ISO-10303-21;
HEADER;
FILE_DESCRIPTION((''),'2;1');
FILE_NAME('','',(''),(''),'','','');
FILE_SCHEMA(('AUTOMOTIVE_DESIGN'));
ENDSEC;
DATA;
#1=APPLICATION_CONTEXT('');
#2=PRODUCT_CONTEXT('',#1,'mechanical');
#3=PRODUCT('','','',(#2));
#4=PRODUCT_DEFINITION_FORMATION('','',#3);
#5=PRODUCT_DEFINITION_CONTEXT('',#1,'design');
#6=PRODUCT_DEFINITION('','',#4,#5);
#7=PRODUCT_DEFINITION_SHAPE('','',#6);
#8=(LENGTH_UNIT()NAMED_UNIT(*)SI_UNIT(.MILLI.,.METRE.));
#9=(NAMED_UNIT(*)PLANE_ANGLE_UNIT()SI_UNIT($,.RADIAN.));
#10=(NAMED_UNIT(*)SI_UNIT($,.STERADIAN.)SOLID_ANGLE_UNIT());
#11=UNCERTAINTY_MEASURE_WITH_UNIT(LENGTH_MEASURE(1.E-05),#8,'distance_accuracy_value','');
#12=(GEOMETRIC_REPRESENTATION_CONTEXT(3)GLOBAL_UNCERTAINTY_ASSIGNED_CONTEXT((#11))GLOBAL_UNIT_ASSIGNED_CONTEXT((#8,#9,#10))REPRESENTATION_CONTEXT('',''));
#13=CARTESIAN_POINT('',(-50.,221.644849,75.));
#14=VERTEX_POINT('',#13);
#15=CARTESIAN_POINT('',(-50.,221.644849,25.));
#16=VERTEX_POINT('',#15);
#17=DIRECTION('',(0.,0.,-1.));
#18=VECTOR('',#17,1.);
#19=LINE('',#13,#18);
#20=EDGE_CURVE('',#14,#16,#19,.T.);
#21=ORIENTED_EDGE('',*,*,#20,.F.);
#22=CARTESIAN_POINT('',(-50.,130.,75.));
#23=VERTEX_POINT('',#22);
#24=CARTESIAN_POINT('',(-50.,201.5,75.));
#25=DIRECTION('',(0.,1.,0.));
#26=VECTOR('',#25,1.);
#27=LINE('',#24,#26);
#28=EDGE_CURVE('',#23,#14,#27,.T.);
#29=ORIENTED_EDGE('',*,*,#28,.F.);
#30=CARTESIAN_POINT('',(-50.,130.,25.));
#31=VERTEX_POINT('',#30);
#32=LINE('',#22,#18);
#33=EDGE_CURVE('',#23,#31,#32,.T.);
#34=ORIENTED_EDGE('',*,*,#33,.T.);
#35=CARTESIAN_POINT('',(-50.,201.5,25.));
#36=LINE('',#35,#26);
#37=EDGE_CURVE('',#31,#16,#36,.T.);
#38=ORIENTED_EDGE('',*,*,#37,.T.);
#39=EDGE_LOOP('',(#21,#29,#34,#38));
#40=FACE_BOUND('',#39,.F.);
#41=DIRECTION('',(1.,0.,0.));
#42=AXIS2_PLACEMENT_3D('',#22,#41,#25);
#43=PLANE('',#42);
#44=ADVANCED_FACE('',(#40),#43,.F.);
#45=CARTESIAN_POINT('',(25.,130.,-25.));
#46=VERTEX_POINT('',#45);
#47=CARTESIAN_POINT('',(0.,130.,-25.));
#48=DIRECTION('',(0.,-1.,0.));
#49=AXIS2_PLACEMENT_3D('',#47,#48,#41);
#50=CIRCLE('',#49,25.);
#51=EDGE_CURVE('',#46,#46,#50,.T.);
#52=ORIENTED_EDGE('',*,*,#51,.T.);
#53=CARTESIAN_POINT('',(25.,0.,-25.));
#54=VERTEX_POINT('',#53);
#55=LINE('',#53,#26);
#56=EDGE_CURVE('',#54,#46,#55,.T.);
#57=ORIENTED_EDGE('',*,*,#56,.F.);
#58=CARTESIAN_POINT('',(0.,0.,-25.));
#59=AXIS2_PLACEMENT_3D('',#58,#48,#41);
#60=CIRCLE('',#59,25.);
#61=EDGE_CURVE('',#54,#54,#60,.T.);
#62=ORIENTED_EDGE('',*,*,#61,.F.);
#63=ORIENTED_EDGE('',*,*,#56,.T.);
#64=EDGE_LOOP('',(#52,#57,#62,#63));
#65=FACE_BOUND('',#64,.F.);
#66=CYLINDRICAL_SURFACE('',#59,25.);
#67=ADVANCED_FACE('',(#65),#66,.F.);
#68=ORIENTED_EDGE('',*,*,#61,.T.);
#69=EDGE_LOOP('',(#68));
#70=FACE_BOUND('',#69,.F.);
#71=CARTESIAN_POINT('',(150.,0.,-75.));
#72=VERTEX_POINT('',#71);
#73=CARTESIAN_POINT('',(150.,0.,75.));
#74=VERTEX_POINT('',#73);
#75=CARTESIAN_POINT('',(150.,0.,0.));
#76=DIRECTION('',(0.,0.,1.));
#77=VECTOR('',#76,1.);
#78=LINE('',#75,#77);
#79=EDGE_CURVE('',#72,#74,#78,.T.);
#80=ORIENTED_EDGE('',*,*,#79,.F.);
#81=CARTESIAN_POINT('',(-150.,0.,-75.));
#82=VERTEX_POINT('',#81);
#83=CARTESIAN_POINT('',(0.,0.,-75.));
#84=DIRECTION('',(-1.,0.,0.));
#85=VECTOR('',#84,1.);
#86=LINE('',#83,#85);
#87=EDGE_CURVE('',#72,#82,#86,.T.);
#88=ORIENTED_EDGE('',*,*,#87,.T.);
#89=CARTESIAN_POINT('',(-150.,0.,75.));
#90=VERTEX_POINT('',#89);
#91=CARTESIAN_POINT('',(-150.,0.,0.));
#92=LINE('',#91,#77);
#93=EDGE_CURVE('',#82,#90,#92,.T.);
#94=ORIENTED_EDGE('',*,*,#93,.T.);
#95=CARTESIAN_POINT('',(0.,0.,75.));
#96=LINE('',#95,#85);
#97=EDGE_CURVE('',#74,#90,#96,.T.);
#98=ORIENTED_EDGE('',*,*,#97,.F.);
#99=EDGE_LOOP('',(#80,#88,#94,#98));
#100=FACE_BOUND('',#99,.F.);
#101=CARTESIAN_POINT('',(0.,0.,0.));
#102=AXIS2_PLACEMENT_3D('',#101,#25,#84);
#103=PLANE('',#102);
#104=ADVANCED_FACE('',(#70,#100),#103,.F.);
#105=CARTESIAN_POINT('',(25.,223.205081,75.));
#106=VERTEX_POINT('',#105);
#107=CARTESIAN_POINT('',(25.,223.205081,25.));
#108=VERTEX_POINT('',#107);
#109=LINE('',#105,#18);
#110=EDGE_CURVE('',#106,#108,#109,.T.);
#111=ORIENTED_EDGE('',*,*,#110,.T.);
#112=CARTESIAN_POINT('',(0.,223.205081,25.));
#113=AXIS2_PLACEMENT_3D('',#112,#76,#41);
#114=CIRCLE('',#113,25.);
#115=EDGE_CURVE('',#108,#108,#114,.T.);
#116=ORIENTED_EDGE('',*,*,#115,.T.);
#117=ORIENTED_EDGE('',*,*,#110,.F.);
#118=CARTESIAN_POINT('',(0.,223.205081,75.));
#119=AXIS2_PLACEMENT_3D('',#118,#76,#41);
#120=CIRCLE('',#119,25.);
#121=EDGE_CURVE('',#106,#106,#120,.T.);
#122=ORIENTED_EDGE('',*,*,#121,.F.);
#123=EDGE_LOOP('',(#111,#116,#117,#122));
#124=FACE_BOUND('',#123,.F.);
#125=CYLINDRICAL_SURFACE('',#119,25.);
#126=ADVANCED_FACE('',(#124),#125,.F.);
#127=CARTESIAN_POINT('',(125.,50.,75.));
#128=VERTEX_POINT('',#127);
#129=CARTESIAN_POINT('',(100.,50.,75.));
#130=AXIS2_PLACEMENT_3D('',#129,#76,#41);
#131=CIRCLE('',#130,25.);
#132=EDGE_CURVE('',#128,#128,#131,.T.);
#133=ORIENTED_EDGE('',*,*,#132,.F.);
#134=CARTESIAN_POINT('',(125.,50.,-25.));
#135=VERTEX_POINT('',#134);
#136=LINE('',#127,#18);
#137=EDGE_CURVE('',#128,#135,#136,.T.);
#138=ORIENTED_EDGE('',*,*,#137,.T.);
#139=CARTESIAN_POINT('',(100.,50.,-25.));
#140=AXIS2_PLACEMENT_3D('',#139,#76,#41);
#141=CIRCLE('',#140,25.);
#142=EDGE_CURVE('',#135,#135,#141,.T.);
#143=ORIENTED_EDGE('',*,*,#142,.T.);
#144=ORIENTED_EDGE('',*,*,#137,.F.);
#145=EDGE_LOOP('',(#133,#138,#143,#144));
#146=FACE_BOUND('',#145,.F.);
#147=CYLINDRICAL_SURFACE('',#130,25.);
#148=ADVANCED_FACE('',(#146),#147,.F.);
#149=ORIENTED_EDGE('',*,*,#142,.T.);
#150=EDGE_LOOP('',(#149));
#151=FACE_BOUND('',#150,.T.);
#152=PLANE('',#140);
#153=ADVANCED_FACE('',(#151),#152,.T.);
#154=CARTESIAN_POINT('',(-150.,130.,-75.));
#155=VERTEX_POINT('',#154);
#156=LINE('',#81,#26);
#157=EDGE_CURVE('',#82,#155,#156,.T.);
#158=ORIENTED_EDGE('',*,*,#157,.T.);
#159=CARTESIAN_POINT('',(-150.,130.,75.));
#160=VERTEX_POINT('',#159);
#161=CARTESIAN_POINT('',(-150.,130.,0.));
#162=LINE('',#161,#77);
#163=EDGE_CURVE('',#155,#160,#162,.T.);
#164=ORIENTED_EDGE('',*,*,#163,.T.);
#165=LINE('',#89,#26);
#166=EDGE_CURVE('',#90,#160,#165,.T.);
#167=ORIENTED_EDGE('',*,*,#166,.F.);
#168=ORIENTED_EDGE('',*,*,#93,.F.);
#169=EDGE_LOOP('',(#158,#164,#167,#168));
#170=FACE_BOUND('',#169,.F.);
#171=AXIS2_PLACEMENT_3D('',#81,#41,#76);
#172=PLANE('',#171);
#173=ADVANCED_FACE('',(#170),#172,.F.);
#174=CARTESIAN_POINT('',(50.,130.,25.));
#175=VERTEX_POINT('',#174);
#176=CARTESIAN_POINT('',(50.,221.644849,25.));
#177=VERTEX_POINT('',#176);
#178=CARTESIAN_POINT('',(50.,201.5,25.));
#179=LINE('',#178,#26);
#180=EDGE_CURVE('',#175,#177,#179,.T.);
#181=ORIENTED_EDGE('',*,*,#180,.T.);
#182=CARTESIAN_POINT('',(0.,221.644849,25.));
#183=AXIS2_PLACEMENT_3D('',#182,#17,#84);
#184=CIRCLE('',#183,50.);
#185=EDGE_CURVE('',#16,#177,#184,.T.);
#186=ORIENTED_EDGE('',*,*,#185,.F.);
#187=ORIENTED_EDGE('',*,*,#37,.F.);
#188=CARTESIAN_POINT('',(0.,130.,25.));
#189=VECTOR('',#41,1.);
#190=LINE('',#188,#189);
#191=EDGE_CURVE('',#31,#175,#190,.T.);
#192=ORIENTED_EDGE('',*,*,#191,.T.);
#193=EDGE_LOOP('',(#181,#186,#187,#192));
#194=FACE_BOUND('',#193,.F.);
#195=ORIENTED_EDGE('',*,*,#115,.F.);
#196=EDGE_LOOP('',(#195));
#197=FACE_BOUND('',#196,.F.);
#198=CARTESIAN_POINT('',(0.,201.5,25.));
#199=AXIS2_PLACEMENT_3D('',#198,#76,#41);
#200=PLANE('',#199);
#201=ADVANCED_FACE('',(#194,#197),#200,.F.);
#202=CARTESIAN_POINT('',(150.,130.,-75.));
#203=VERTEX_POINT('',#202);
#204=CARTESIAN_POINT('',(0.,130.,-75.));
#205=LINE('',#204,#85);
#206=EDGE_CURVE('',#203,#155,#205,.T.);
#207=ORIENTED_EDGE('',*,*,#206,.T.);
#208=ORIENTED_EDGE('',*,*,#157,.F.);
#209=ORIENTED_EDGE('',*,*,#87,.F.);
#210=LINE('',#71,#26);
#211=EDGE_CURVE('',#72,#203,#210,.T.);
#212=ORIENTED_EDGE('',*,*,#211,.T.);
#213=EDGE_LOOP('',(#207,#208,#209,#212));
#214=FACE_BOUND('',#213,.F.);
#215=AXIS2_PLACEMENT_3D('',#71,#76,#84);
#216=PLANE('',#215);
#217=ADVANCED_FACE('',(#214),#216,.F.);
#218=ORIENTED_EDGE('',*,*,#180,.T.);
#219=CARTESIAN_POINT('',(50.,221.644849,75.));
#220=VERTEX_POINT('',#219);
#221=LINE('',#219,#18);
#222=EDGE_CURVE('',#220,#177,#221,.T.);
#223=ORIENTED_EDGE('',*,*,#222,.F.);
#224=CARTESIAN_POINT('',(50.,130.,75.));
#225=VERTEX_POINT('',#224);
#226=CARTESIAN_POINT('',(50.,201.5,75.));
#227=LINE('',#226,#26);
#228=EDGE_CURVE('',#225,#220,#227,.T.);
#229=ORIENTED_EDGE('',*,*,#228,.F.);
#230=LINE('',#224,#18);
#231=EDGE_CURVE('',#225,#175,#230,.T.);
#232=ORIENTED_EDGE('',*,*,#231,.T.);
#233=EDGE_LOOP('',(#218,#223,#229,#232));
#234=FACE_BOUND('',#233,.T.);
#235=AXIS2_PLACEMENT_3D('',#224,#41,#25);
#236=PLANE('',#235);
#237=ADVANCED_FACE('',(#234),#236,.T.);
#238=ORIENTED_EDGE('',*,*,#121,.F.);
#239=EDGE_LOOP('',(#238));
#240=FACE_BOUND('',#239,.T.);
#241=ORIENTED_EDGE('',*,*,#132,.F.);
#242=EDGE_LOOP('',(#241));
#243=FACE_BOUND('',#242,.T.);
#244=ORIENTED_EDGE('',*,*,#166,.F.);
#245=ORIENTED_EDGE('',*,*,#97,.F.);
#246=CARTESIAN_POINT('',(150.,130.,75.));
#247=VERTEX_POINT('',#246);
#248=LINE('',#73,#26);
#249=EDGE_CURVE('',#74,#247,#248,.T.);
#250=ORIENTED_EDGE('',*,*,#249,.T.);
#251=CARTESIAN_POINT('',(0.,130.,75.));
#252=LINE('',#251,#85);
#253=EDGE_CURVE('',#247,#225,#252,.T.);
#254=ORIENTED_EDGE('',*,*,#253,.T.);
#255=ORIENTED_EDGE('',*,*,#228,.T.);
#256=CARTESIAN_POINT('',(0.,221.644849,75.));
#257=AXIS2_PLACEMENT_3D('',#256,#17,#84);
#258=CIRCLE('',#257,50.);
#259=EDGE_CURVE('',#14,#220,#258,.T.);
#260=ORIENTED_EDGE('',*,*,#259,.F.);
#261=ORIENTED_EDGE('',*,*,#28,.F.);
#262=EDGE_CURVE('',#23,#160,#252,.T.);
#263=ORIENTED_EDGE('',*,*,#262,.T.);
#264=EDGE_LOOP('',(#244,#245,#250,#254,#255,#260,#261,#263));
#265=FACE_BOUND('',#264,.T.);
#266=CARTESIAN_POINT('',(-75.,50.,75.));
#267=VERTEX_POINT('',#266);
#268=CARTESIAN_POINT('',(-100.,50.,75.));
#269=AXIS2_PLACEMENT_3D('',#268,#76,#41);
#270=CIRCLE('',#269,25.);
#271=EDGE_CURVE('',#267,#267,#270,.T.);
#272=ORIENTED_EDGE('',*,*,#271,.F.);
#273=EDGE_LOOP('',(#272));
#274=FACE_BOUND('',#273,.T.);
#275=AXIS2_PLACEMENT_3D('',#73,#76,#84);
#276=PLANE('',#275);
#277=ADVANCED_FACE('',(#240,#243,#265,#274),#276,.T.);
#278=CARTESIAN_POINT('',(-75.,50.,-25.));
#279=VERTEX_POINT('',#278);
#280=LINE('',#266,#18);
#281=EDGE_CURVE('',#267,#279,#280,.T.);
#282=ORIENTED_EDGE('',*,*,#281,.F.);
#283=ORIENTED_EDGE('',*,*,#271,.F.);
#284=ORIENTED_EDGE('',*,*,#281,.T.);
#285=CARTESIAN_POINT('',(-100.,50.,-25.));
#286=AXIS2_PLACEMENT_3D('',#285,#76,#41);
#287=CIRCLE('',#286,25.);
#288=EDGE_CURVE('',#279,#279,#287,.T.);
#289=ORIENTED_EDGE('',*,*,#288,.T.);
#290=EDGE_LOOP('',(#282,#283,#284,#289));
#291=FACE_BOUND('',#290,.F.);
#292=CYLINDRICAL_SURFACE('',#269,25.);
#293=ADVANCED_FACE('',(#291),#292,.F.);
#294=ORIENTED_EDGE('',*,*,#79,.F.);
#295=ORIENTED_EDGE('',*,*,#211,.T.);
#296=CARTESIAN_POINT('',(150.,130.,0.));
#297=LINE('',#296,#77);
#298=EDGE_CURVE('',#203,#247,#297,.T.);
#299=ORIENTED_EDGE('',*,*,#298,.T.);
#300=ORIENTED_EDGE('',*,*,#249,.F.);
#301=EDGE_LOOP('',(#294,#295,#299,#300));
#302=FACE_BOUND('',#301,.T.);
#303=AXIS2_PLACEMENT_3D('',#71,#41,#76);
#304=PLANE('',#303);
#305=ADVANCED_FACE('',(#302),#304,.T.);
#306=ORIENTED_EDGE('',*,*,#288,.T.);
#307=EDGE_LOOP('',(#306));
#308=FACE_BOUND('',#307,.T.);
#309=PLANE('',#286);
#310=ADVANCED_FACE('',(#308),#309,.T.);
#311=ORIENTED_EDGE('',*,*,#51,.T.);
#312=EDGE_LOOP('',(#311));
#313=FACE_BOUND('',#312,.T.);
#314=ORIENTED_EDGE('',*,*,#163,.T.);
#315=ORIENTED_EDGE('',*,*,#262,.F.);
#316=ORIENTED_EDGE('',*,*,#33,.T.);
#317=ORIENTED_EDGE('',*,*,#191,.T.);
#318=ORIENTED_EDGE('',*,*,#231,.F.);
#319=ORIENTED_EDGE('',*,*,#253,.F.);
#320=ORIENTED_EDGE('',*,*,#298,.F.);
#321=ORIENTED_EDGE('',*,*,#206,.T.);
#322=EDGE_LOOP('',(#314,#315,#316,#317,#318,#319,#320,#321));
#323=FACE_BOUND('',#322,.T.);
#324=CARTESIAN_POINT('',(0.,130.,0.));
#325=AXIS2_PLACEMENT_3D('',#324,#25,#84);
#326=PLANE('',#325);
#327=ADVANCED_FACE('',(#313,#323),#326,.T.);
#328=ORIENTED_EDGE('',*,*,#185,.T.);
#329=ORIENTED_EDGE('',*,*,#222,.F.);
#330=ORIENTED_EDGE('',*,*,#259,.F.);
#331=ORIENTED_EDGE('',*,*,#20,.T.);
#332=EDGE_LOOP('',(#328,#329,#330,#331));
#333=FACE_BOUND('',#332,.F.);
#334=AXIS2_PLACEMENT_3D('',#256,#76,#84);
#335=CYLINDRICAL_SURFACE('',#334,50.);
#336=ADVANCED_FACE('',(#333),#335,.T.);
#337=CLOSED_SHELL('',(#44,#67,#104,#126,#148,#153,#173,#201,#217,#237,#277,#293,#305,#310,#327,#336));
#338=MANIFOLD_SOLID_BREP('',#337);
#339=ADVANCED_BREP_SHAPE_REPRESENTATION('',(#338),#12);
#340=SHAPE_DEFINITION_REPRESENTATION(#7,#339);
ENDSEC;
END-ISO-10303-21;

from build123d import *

# Parameters (mm, degrees)
F0_W      = 160
F0_H      = 160
F1_DEPTH  = 160
F4_W      = 300
F4_H      = 150
F5_DEPTH  = 130
F6_W      = 100
F6_H      = 143
F7_DEPTH  = 50
F8_R      = 25
F9_DEPTH  = 100
F10_R     = 25
F11_DEPTH = 50
F13_DEPTH = 50
F14_R     = 25
F15_DEPTH = 130


with BuildPart() as f1:
    # F0 (on Front) → F1 (new body)
    with BuildSketch(Plane.XZ):
        Rectangle(F0_W, F0_H)
    extrude(amount=F1_DEPTH)


with BuildPart() as f5:
    # F4 (on face) → F5 (new body)
    with BuildSketch(Plane(origin=(0, 0, 0), x_dir=(-1, 0, 0), z_dir=(0, 1, 0))):
        Rectangle(F4_W, F4_H)
    extrude(amount=F5_DEPTH)

    # F6 (on face) → F7 (join)
    with BuildSketch(Plane.XY.offset(75)):
        with Locations((0, 201.5)):
            Rectangle(F6_W, F6_H)
    extrude(amount=-F7_DEPTH)

    # F8 (on face) → F9 (cut)
    with BuildSketch(Plane.XY.offset(75)):
        with Locations((100, 50)):
            Circle(F8_R)
        with Locations((-100, 50)):
            Circle(F8_R)
    extrude(amount=-F9_DEPTH, mode=Mode.SUBTRACT)

    # F10 (on face) → F11 (cut)
    with BuildSketch(Plane.XY.offset(75)):
        with Locations((0, 223.2050807569)):
            Circle(F10_R)
    extrude(amount=-F11_DEPTH, mode=Mode.SUBTRACT)

    # F12 (on face) → F13 (cut)
    with BuildSketch(Plane.XY.offset(75)):
        with BuildLine():
            ThreePointArc((-50, 221.6448485851), (0, 271.6448485851), (50, 221.6448485851))
            Line((50, 221.6448485851), (50, 273))
            Line((50, 273), (-50, 273))
            Line((-50, 273), (-50, 221.6448485851))
        make_face()
    extrude(amount=-F13_DEPTH, mode=Mode.SUBTRACT)

    # F14 (on face) → F15 (cut)
    with BuildSketch(Plane.XZ):
        with Locations((0, -25)):
            Circle(F14_R)
    extrude(amount=-F15_DEPTH, mode=Mode.SUBTRACT)


solid = f5.part
